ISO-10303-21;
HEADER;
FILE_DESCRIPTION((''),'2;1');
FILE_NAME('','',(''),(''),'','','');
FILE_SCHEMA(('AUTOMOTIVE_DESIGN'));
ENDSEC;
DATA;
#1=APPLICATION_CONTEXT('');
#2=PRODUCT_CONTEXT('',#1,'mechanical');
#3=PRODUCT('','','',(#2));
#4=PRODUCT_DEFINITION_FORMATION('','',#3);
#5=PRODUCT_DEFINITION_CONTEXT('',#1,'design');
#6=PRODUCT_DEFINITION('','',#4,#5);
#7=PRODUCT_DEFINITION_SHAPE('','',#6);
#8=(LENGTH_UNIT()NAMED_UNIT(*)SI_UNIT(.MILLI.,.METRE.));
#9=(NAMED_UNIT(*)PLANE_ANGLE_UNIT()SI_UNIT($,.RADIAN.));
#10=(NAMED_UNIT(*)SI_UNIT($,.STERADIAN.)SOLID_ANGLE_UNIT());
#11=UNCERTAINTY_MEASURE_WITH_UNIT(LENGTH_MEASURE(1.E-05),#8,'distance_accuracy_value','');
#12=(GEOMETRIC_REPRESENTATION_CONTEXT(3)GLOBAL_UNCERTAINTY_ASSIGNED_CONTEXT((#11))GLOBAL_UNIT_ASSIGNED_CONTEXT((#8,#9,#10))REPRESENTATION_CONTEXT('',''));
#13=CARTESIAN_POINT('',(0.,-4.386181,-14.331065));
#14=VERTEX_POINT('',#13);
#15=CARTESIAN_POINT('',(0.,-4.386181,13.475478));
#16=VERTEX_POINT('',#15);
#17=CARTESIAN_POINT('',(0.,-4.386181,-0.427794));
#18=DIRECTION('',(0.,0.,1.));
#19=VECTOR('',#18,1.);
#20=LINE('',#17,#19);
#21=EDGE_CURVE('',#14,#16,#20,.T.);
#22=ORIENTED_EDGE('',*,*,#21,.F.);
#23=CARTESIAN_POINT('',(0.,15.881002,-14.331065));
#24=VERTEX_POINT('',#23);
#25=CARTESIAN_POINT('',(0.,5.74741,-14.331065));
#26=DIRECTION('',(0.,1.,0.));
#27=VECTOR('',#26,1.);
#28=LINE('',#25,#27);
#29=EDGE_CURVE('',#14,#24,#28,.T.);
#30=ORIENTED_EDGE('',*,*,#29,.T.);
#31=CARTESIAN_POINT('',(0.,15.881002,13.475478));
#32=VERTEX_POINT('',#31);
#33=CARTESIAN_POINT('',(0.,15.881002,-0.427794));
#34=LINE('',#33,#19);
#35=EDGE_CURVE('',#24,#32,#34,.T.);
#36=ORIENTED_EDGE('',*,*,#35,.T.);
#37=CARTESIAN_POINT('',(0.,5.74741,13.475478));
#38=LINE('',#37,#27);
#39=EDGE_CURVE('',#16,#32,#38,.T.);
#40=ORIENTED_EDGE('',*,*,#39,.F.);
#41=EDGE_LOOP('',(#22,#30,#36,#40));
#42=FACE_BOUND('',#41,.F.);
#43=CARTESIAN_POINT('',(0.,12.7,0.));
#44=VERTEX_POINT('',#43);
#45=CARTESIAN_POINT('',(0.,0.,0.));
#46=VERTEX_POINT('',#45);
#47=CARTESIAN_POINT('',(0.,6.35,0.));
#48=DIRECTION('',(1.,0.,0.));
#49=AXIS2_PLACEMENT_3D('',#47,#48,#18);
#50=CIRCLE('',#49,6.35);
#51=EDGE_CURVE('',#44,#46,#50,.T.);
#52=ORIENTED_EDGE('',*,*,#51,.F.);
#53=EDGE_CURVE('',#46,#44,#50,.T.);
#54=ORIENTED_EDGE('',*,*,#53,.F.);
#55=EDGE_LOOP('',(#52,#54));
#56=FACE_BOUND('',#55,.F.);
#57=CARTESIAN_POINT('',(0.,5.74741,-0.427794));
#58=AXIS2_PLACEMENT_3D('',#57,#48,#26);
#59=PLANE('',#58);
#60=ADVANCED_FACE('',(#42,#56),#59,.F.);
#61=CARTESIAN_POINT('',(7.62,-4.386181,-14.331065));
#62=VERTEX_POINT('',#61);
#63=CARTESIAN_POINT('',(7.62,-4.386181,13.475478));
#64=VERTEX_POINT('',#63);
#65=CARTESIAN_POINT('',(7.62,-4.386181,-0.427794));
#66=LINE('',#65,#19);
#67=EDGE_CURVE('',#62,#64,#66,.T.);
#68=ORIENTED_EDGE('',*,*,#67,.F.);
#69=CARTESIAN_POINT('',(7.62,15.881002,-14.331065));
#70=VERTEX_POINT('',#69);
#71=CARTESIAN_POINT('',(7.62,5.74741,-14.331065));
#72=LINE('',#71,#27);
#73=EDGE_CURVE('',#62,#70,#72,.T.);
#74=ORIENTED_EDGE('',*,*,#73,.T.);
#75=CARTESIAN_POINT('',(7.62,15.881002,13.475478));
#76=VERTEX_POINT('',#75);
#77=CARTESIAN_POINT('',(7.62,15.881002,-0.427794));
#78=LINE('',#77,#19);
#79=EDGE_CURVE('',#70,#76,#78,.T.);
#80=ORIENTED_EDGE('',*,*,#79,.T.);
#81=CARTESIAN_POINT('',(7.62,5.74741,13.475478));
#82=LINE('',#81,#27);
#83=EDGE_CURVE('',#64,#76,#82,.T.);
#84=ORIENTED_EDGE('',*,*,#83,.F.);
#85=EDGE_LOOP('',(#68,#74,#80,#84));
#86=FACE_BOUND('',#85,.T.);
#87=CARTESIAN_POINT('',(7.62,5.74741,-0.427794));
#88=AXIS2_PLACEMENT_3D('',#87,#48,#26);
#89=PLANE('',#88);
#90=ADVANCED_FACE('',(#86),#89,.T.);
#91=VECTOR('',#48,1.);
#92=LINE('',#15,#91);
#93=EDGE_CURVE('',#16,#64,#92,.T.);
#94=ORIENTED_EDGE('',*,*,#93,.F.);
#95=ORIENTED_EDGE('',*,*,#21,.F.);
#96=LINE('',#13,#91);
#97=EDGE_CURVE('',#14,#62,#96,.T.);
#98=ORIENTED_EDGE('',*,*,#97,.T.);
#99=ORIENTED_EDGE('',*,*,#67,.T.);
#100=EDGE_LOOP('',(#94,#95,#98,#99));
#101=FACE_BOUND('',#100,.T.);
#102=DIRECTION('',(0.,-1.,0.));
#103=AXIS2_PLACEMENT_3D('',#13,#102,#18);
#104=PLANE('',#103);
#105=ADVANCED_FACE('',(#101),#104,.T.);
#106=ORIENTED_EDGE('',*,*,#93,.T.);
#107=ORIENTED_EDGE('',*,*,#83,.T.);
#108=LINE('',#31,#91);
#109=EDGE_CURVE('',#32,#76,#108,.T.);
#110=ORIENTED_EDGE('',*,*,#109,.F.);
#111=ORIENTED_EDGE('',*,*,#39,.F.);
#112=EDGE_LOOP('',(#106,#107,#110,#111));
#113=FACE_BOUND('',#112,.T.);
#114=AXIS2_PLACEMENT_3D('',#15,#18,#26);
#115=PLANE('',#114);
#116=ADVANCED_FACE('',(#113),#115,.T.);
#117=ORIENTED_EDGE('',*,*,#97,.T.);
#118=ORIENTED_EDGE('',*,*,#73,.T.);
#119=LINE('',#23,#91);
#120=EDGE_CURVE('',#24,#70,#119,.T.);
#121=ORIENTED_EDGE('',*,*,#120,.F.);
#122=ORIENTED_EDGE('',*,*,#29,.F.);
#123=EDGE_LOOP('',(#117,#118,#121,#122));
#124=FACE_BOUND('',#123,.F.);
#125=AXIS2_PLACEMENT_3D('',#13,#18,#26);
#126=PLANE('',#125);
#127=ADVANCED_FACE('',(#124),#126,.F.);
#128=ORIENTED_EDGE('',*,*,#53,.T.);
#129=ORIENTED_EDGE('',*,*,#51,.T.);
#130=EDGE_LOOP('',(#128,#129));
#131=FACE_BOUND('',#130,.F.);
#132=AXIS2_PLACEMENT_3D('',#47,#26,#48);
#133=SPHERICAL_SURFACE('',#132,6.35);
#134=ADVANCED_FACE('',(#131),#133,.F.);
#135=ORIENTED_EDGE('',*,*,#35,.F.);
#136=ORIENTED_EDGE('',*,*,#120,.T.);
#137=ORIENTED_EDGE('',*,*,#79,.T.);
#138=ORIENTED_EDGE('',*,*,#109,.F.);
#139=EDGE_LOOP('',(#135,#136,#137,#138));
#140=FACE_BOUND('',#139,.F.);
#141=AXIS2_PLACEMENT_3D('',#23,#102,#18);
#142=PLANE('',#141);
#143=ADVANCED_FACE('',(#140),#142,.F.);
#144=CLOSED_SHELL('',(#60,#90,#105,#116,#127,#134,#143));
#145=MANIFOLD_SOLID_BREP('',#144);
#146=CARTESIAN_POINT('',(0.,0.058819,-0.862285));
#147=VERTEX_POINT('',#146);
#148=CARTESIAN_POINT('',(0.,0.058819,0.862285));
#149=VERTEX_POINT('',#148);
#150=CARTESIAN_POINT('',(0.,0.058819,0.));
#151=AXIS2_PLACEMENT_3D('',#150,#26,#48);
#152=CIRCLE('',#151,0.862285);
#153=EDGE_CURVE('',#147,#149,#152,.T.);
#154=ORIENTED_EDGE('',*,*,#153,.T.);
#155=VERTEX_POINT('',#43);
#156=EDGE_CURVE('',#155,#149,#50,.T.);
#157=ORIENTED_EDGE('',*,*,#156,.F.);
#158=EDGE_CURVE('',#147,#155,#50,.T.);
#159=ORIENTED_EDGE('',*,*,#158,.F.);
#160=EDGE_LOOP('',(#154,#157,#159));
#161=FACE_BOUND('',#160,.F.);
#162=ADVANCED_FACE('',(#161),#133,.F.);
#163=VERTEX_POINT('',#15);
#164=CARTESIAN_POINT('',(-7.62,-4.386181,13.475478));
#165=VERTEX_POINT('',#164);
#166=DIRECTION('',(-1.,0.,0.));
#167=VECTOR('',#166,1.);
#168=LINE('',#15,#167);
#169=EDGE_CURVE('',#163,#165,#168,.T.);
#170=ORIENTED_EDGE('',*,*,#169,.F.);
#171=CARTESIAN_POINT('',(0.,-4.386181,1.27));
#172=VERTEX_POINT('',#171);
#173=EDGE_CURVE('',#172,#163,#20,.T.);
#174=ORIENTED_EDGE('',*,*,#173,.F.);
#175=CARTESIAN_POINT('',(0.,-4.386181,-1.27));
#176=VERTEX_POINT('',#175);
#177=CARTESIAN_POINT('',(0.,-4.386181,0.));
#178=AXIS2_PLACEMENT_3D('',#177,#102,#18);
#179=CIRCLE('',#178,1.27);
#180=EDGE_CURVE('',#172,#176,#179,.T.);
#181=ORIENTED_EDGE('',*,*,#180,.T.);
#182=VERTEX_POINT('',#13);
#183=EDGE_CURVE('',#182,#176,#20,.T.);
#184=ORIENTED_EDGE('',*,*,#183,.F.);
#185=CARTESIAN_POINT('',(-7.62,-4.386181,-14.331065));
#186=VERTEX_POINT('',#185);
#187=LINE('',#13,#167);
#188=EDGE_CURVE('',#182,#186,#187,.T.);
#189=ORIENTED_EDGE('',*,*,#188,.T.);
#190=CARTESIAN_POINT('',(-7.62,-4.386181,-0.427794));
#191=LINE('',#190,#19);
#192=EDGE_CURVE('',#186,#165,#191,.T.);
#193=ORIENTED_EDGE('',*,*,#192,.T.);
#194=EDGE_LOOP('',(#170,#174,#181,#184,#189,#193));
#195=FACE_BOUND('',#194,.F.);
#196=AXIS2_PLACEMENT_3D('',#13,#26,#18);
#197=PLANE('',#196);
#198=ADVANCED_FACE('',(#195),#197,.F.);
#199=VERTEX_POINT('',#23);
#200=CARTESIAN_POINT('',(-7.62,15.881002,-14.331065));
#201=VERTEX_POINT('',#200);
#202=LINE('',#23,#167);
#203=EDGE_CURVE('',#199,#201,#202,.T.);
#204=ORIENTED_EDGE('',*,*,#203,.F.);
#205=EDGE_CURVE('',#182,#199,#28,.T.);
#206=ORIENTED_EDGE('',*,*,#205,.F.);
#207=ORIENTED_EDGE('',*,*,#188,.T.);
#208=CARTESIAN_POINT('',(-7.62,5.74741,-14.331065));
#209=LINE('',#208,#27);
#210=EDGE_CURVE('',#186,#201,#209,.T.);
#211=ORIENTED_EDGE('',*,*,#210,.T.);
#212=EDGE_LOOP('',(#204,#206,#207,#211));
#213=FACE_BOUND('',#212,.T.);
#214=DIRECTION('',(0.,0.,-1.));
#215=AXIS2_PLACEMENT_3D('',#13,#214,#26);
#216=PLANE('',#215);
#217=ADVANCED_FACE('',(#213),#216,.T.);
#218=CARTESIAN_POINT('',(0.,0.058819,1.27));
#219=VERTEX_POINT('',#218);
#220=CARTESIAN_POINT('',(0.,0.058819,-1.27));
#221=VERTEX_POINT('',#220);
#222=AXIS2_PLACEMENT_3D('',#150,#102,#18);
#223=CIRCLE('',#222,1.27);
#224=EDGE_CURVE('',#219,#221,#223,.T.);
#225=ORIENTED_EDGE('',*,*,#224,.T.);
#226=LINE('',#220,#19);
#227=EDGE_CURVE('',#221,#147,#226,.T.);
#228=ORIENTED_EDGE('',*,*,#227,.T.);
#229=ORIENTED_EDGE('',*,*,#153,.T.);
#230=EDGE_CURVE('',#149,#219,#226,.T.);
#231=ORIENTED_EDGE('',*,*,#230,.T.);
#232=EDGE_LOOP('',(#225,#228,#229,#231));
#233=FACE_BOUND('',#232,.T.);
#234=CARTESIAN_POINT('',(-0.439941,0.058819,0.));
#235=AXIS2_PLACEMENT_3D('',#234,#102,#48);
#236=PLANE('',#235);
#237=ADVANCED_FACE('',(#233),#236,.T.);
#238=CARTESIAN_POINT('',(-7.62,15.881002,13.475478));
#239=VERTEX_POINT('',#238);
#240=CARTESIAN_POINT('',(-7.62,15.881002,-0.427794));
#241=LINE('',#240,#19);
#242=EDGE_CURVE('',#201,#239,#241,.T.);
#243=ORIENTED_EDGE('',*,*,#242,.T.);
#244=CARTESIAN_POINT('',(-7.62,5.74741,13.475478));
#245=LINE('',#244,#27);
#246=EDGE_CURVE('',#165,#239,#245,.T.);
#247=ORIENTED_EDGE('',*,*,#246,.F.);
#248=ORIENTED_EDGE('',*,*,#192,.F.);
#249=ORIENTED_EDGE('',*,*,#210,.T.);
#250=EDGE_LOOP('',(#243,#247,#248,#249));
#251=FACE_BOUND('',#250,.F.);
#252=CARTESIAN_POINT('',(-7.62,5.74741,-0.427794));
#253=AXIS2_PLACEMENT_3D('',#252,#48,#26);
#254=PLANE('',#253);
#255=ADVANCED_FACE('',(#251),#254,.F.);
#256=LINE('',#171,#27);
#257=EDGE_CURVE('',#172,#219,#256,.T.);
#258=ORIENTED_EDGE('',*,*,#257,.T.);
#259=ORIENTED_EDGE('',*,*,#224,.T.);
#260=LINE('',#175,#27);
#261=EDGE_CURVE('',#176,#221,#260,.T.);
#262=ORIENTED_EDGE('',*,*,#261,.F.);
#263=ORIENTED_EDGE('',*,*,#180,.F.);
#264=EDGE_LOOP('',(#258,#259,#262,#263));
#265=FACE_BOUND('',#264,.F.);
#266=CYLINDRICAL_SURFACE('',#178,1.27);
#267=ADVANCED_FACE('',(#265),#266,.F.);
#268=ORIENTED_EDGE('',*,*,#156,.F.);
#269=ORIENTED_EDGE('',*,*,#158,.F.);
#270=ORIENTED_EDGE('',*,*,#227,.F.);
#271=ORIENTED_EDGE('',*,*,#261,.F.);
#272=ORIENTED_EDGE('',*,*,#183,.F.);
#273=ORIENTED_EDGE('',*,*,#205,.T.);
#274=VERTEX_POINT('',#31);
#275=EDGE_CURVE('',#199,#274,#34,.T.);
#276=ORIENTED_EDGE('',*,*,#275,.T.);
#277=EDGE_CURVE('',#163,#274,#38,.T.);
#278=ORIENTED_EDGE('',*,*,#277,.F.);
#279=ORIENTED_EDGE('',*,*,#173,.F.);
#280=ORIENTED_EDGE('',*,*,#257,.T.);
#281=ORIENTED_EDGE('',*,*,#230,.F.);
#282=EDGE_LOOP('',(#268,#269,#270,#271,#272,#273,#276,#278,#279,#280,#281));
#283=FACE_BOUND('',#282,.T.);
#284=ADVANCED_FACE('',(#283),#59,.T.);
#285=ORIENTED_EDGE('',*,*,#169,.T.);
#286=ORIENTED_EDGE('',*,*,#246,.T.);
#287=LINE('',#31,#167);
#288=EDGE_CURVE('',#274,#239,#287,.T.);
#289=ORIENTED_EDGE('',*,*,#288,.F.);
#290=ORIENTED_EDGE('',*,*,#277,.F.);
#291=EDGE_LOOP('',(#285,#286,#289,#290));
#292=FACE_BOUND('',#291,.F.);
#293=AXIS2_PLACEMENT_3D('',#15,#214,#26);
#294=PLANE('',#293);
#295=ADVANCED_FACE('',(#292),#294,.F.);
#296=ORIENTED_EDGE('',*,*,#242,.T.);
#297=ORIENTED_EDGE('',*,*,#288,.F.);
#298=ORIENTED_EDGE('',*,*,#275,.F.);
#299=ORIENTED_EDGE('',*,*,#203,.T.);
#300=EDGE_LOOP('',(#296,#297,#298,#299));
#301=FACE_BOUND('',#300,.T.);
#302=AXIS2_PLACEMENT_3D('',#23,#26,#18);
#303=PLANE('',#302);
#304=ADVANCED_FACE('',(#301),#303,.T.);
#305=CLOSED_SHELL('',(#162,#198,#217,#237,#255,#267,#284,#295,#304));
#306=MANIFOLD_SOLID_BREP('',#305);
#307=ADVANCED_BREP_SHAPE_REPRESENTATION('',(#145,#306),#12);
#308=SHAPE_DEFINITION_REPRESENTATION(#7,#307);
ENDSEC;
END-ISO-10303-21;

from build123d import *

# Parameters (mm, degrees)
F2_W     = 20.2671834268
F2_H     = 27.8065428138
F3_DEPTH = 7.62
F4_DEPTH = 7.62
F7_DEPTH = 4.445


# Not quite as in the source:
# - after a boolean that leaves OpenCascade's solid faulty, fix() repairs it


with BuildPart() as f1:
    # F0 (on Top) → F1 (revolve)
    with BuildSketch(Plane.XY):
        with BuildLine():
            Line((0, 12.7), (0, 0))
            ThreePointArc((0, 0), (6.35, 6.35), (0, 12.7))
        make_face()
    revolve(axis=Axis((0, 6.35, 0), (0, 1, 0)))


with BuildPart() as f3:
    # F2 (on Right) → F3 (new body)
    with BuildSketch(Plane.YZ):
        with Locations((5.7474102359, -0.4277937114)):
            Rectangle(F2_W, F2_H)
    extrude(amount=F3_DEPTH)

    # F5: cut F1
    add(f1.part, mode=Mode.SUBTRACT)

    add(f3.part.fix(), mode=Mode.REPLACE)


with BuildPart() as f4:
    # F2 (on Right) → F4 (new body)
    with BuildSketch(Plane.YZ):
        with Locations((5.7474102359, -0.4277937114)):
            Rectangle(F2_W, F2_H)
    extrude(amount=-F4_DEPTH)

    # F5: cut F1
    add(f1.part, mode=Mode.SUBTRACT)

    # F6 (on face) → F7 (cut)
    with BuildSketch(Plane.XZ.offset(4.3861814775)):
        with BuildLine():
            ThreePointArc((0, 1.27), (-1.27, 0), (0, -1.27))
            Line((0, -1.27), (0, 1.27))
        make_face()
    extrude(amount=-F7_DEPTH, mode=Mode.SUBTRACT)


solid = Compound([f3.part, f4.part])
